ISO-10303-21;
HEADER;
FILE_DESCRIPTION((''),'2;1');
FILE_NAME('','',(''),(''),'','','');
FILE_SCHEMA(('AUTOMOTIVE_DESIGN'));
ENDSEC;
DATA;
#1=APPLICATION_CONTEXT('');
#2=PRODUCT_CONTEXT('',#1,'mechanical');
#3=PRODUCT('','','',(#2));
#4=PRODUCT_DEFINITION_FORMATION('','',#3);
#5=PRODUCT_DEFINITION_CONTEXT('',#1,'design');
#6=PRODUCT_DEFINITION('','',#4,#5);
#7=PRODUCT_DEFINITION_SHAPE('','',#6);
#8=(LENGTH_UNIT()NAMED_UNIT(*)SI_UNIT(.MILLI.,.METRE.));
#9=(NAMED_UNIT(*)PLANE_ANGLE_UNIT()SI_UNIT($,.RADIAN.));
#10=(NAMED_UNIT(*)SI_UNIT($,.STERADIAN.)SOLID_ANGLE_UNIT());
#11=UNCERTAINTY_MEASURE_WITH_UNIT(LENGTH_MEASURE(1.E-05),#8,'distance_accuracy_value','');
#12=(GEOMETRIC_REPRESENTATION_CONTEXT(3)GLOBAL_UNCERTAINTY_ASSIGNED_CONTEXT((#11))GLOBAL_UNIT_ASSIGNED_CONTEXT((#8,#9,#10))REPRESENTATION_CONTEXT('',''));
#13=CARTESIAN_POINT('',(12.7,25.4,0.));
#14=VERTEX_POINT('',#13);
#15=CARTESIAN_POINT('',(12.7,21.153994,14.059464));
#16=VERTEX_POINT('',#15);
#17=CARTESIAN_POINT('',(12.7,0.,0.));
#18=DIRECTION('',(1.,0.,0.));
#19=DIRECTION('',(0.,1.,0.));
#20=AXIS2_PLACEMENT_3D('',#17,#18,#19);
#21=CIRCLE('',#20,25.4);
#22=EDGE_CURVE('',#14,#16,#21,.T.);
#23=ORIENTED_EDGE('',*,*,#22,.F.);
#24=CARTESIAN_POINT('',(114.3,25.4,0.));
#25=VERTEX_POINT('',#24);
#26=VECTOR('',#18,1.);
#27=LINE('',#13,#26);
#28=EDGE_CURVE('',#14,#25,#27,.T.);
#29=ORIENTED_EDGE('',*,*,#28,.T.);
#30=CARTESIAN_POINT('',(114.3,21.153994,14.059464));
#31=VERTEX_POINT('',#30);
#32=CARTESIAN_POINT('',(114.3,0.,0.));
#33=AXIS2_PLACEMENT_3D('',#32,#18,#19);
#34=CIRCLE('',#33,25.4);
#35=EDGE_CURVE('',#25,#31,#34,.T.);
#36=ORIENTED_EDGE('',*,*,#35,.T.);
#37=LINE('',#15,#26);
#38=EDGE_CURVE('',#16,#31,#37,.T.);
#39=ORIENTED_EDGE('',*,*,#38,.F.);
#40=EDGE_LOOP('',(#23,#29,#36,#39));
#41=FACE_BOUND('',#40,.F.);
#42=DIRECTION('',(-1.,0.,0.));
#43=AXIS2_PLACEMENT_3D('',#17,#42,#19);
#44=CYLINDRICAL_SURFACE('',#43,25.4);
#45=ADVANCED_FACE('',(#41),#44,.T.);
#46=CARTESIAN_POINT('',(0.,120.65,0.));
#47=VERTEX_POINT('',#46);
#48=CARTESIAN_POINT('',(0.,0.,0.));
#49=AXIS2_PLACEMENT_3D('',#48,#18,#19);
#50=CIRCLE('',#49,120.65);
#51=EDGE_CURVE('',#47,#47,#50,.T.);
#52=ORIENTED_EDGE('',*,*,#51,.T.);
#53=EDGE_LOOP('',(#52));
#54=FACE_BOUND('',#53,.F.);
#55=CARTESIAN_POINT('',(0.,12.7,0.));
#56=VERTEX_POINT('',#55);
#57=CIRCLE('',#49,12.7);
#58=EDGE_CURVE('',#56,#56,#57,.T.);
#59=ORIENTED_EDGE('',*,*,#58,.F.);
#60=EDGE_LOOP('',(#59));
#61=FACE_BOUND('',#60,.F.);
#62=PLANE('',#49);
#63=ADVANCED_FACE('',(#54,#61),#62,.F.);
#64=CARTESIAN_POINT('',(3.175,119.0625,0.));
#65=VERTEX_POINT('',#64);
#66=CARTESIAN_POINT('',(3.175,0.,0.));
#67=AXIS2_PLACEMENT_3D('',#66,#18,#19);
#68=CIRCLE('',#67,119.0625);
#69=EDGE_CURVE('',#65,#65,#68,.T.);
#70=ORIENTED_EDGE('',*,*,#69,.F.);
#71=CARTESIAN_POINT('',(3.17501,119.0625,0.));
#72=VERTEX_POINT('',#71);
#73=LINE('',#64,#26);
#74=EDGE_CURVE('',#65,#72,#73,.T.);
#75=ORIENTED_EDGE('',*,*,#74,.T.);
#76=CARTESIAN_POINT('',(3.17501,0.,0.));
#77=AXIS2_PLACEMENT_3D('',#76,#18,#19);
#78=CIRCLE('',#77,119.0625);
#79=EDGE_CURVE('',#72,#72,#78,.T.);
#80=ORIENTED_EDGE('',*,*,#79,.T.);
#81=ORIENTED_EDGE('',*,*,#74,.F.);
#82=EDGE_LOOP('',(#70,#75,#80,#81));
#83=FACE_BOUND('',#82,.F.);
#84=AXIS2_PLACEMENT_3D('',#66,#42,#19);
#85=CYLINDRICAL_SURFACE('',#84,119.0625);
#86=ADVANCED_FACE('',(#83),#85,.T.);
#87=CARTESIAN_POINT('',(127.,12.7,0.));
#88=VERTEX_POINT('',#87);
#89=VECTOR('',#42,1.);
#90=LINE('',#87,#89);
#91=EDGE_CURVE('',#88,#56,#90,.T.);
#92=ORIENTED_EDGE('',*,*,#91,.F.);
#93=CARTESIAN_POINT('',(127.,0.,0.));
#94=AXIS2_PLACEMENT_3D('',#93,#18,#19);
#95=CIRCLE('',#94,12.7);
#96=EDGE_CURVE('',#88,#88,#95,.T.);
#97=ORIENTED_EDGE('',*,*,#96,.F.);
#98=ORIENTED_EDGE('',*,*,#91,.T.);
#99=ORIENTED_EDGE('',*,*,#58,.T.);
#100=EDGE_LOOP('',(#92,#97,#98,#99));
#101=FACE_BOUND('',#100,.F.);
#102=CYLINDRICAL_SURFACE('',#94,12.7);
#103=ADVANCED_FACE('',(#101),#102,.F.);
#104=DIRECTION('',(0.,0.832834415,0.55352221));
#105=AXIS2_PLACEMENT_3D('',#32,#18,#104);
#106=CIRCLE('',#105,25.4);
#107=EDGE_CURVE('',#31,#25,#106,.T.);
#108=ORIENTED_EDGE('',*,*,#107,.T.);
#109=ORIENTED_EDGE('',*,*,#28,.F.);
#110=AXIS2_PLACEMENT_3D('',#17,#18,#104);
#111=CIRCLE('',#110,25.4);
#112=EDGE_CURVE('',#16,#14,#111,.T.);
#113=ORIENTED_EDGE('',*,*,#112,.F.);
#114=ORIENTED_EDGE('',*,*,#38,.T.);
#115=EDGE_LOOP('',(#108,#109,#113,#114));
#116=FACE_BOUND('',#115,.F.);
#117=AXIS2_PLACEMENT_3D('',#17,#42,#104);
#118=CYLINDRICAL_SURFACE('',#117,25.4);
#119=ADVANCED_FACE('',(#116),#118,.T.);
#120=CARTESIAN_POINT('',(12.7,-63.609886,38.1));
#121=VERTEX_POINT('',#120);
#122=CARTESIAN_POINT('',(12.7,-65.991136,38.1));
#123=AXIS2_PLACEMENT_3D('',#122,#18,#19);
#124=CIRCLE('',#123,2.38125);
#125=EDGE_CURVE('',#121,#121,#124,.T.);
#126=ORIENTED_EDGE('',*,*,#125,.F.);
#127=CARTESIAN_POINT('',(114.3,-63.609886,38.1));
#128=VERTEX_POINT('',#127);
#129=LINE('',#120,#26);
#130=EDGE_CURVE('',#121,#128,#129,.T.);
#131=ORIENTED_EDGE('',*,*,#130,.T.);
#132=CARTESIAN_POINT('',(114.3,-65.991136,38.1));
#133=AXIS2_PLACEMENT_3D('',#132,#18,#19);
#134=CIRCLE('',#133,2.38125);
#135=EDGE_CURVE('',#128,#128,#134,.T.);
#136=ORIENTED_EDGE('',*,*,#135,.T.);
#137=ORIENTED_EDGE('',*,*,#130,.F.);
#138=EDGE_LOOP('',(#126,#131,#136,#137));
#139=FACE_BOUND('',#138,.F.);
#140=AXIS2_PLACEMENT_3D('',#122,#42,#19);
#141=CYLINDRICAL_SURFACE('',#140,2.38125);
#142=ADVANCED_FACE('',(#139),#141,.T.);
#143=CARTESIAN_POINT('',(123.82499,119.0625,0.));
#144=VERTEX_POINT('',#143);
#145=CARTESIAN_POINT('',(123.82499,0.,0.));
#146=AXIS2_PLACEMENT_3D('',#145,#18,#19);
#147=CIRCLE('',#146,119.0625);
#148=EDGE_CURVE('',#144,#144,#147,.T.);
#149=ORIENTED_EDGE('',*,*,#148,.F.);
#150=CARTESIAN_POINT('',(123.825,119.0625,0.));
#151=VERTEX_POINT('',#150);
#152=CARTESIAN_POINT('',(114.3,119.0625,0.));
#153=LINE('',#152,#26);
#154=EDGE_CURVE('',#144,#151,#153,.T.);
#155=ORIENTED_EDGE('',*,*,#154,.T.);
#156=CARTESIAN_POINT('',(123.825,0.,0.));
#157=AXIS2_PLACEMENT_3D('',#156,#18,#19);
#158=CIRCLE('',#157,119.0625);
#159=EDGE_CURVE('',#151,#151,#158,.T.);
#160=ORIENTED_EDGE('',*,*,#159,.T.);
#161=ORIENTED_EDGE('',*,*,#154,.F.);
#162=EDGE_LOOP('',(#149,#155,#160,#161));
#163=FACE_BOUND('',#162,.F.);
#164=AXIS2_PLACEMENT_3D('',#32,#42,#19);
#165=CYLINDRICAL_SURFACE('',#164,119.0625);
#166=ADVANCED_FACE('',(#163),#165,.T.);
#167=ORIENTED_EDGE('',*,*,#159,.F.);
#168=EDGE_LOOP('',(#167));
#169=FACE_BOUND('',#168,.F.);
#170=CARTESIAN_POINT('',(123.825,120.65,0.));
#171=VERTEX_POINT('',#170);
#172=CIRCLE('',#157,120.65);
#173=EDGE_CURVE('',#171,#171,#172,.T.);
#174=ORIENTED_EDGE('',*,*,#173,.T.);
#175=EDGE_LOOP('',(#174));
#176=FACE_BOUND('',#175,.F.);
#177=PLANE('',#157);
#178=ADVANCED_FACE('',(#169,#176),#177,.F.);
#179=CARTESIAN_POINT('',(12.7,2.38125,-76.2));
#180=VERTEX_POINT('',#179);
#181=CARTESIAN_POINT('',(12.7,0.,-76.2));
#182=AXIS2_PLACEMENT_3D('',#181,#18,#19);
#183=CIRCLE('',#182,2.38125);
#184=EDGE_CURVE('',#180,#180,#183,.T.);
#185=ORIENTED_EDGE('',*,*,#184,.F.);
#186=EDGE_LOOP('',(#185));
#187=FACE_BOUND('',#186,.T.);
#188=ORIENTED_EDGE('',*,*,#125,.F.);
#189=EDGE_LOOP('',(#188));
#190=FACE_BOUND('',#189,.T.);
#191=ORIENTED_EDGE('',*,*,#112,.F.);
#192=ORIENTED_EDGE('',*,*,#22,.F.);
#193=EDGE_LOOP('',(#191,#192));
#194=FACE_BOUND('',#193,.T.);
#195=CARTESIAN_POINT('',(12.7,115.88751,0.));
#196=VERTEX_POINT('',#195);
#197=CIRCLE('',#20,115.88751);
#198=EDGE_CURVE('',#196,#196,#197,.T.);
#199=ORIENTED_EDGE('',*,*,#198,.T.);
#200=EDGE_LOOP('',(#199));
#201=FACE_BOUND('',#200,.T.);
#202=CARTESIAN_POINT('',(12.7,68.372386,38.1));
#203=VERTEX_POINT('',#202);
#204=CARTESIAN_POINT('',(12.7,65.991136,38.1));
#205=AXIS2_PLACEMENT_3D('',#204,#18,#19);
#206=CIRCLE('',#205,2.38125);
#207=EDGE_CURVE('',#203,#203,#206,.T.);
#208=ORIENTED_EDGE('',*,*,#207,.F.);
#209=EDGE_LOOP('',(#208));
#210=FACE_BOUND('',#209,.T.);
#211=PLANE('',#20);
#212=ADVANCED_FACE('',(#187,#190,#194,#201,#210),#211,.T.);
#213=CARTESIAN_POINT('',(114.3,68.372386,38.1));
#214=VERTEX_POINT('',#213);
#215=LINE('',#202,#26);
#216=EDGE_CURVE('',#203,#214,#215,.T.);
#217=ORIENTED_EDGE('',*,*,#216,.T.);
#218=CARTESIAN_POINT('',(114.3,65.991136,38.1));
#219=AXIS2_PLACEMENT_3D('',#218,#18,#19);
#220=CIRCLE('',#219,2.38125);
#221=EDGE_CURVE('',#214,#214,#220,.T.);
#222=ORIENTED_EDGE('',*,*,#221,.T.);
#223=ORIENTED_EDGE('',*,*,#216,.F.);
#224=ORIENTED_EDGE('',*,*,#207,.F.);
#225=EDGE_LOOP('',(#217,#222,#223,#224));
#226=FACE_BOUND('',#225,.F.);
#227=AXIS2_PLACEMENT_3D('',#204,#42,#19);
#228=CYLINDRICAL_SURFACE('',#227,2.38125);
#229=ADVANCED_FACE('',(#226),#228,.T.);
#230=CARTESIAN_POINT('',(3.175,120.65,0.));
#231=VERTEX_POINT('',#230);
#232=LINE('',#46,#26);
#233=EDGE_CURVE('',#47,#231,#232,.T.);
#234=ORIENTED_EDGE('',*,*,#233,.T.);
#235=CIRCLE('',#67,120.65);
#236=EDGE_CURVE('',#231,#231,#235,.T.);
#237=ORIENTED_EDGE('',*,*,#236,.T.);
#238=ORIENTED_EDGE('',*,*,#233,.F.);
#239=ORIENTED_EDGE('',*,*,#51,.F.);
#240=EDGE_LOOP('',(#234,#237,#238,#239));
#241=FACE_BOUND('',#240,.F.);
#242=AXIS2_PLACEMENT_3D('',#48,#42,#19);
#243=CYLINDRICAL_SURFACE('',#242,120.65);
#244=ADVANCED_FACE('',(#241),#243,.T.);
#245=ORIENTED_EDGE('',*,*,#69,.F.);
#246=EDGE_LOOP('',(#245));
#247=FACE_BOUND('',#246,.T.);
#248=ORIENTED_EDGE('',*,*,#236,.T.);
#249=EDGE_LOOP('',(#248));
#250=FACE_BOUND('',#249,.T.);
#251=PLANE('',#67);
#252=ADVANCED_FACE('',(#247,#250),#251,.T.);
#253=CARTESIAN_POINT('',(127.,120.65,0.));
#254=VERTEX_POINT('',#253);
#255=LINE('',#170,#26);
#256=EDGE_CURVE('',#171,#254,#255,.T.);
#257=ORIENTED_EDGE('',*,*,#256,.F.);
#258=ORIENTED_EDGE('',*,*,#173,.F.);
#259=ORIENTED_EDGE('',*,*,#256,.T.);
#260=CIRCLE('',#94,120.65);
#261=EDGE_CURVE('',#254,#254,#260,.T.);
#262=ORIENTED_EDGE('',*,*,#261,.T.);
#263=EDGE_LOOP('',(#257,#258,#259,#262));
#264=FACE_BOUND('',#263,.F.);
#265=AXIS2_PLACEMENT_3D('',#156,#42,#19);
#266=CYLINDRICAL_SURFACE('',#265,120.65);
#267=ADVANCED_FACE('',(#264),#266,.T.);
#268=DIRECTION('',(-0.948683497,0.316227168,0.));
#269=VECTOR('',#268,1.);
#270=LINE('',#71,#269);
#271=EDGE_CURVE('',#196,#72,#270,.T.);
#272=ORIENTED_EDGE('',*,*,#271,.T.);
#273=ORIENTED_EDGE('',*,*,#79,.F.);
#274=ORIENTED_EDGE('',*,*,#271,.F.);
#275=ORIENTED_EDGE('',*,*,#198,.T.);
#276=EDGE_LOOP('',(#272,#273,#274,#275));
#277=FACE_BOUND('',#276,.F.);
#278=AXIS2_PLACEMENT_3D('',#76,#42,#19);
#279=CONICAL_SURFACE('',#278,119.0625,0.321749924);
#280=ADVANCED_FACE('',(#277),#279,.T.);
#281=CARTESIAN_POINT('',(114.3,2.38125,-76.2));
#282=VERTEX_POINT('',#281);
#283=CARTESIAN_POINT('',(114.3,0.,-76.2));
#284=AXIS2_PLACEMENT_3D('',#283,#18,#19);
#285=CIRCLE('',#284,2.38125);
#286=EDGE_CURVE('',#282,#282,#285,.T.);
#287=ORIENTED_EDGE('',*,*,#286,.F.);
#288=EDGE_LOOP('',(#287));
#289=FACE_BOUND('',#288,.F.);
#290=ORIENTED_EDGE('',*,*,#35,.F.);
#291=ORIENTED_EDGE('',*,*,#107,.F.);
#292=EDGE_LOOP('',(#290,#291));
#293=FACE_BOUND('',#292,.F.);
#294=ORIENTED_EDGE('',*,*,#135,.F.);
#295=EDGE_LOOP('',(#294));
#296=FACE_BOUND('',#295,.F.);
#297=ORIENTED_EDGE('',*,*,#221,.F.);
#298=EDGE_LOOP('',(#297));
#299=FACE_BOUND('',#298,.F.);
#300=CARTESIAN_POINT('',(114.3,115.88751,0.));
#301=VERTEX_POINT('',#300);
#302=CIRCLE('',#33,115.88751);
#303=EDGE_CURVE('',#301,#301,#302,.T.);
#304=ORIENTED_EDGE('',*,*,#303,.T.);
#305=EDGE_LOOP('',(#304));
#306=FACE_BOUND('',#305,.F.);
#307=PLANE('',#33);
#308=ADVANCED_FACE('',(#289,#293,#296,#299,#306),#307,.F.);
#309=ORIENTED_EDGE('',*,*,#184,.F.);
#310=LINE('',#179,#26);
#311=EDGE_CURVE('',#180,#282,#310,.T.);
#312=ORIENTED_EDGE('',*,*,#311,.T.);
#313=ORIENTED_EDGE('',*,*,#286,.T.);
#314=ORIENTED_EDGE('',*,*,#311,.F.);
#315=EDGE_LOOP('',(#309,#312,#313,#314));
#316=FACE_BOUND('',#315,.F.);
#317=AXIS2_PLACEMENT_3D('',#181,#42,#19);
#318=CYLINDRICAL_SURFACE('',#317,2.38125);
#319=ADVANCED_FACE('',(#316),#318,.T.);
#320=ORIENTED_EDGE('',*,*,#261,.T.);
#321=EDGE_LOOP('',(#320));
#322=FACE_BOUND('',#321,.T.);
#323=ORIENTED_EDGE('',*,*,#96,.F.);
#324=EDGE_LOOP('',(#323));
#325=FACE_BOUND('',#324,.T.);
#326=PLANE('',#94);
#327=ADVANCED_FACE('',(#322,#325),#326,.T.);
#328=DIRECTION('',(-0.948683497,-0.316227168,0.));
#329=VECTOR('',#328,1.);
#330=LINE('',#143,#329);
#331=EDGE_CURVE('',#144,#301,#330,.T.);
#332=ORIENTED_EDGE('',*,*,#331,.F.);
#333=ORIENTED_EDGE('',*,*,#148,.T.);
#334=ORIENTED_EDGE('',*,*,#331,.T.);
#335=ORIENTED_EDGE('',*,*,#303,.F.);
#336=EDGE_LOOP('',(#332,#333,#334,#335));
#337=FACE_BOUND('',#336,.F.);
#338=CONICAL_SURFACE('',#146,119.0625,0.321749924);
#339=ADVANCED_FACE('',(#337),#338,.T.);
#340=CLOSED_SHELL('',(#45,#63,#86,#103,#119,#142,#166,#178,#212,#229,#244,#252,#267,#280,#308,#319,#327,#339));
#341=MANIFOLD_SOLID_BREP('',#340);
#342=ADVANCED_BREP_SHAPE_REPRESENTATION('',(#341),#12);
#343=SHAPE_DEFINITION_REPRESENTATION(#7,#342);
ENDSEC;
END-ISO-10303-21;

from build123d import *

# Parameters (mm, degrees)
F0_R      = 120.65
F1_DEPTH  = 3.175
F2_R      = 119.0625
F3_DEPTH  = 9.525
F4_SIZE2  = 9.52499
F4_SIZE   = 3.17499
F5_R      = 2.38125
F6_DEPTH  = 101.6
F7_R      = 119.0625
F8_DEPTH  = 9.525
F9_R      = 120.65
F10_DEPTH = 3.175
F11_SIZE2 = 3.17499
F11_SIZE  = 9.52499
F12_R     = 12.7
F13_DEPTH = 127.001


# Not quite as in the source:
# - a fillet or chamfer is up to 0.001 mm smaller than in the source, because OpenCascade refuses the exact size


with BuildPart() as f1:
    # F0 (on Right) → F1 (new body)
    with BuildSketch(Plane.YZ):
        Circle(F0_R)
    extrude(amount=F1_DEPTH)

    # F2 (on face) → F3 (join)
    with BuildSketch(Plane.YZ.offset(3.175)):
        Circle(F2_R)
    extrude(amount=F3_DEPTH)

    # F4 (size 3.175 and 9.525 in the source; OpenCascade refuses exactly that, so slightly less here)
    f4_edges = [f1.edges().sort_by_distance(p)[0] for p in [
        (12.7, -119.0625, 0),
    ]]
    f4_side = f1.faces().sort_by_distance((12.7, 0, 0))[0]
    chamfer(f4_edges, length=F4_SIZE, length2=F4_SIZE2, reference=f4_side)

    # F5 (on face) → F6 (join)
    with BuildSketch(Plane.YZ.offset(12.7)):
        with BuildLine():
            ThreePointArc((21.1539941395, 14.0594641416), (-24.3153393061, -7.3433149482), (25.4, 0))
            ThreePointArc((25.4, 0), (24.3153393061, 7.3433149482), (21.1539941395, 14.0594641416))
        make_face()
        with Locations((0, -76.2)):
            Circle(F5_R)
        with Locations((65.9911357684, 38.1)):
            Circle(F5_R)
        with Locations((-65.9911357684, 38.1)):
            Circle(F5_R)
    extrude(amount=F6_DEPTH)

    # F7 (on face) → F8 (join)
    with BuildSketch(Plane.YZ.offset(114.3)):
        Circle(F7_R)
    extrude(amount=F8_DEPTH)

    # F9 (on face) → F10 (join)
    with BuildSketch(Plane.YZ.offset(123.825)):
        Circle(F9_R)
    extrude(amount=F10_DEPTH)

    # F11 (size 9.525 and 3.175 in the source; OpenCascade refuses exactly that, so slightly less here)
    f11_edges = [f1.edges().sort_by_distance(p)[0] for p in [
        (114.3, -119.0625, 0),
    ]]
    f11_side = f1.faces().sort_by_distance((119.0625, -119.0625, 0))[0]
    chamfer(f11_edges, length=F11_SIZE, length2=F11_SIZE2, reference=f11_side)

    # F12 (on face) → F13 (cut, through all)
    with BuildSketch(Plane.YZ.offset(127)):
        Circle(F12_R)
    extrude(amount=-F13_DEPTH, mode=Mode.SUBTRACT)


solid = f1.part
